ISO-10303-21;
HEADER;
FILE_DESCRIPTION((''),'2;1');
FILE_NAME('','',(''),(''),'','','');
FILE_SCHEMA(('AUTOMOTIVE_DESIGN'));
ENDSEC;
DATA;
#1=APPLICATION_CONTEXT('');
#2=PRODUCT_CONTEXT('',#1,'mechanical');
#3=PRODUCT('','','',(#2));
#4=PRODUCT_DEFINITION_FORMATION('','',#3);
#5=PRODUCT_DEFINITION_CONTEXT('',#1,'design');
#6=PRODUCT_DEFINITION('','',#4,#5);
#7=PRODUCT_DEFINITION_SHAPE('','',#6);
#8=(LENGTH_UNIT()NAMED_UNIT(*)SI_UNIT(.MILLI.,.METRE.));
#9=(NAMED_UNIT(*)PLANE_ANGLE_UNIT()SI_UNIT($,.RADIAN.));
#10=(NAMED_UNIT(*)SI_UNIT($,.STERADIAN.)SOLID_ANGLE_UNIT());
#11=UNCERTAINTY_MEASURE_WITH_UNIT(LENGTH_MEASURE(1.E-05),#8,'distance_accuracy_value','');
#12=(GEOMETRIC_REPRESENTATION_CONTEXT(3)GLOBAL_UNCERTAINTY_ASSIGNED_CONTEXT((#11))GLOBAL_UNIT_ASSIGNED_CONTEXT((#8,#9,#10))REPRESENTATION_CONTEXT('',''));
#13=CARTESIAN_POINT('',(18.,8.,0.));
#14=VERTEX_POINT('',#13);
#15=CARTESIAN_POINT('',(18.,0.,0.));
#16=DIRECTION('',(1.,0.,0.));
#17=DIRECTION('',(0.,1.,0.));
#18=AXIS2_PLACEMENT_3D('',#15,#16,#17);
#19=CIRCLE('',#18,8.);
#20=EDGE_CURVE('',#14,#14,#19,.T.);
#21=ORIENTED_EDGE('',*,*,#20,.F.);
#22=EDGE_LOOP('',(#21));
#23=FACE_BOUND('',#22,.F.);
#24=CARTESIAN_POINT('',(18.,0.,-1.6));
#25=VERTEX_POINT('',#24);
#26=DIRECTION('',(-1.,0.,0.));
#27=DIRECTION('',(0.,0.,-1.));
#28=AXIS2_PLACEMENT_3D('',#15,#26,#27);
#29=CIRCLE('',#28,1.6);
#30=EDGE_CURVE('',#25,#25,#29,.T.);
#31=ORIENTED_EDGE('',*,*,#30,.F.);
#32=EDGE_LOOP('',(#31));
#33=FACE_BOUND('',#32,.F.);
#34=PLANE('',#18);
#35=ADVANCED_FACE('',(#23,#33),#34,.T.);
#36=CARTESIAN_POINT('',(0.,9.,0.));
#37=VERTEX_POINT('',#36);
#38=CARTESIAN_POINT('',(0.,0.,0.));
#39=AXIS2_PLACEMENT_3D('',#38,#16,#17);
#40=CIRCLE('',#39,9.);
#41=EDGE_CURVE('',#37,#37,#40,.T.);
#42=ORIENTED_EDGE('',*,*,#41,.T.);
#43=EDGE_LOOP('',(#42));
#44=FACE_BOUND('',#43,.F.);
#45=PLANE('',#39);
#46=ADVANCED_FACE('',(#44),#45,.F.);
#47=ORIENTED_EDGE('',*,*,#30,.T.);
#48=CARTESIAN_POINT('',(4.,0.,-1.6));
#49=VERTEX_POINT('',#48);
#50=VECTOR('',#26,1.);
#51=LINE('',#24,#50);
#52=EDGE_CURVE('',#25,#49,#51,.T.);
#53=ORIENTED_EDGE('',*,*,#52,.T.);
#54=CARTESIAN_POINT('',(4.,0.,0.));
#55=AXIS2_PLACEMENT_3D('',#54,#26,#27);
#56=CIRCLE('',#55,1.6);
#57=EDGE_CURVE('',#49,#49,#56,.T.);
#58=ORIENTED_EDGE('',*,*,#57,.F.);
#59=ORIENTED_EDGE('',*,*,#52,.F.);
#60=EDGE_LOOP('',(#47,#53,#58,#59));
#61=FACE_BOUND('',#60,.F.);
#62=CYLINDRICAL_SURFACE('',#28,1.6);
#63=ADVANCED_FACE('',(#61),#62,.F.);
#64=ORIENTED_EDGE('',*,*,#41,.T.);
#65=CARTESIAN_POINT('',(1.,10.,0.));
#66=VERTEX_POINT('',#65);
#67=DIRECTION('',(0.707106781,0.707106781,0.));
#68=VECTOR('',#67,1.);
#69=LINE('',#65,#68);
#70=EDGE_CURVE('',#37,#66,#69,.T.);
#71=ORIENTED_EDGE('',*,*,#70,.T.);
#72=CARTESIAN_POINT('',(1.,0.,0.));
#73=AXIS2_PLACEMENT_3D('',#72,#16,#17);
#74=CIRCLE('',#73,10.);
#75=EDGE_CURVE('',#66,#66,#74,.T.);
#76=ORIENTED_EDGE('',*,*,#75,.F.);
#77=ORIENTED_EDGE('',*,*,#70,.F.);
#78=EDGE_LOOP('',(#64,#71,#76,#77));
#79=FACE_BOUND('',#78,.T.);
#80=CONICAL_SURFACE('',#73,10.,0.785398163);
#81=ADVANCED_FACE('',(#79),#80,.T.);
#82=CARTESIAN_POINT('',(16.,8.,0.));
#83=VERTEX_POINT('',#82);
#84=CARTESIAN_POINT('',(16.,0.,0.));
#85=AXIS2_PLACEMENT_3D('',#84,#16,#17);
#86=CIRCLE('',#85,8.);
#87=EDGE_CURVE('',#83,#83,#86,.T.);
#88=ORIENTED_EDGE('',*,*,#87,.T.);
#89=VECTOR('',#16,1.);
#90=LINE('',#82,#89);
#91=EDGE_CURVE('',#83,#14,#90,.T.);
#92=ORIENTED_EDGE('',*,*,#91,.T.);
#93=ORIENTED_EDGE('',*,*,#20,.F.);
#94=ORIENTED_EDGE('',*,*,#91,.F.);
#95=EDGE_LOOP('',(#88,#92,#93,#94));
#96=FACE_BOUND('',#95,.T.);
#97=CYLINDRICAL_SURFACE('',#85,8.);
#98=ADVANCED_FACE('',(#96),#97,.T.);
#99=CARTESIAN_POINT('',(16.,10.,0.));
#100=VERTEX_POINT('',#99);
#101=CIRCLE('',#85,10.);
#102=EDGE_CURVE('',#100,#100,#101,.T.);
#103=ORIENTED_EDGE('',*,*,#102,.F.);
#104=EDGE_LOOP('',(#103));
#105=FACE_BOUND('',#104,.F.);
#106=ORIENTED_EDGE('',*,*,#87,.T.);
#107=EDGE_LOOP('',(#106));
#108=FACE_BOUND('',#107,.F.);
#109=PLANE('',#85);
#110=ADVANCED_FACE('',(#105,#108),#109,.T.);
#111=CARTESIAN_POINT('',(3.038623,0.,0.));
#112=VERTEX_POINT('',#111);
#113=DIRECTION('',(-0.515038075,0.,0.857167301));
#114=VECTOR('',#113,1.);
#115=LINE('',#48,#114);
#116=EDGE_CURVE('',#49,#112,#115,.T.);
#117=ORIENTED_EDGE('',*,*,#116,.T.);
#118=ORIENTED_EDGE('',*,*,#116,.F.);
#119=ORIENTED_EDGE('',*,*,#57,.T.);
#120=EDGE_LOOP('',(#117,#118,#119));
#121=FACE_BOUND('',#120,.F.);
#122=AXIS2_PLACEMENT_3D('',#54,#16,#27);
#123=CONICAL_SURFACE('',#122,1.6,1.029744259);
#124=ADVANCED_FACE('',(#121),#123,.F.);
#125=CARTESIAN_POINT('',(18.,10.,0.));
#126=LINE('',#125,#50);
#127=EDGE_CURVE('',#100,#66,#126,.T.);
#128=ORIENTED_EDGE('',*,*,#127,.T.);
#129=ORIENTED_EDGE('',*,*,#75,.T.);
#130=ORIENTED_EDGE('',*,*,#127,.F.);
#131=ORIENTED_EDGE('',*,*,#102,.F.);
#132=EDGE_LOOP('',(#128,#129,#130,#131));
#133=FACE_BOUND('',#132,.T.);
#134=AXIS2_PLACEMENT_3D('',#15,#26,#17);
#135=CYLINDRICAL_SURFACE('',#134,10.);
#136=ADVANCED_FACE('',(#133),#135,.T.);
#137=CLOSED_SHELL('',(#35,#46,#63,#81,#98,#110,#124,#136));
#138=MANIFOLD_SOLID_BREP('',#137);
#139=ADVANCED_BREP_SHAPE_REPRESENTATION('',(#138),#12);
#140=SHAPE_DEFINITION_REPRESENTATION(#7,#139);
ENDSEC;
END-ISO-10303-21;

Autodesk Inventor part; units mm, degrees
ref_plane "YZ Plane" through (0, 0, 0) normal (1, 0, 0) x (0, 1, 0)
ref_plane "XZ Plane" through (0, 0, 0) normal (0, 1, 0) x (-1, 0, 0)
ref_plane "XY Plane" through (0, 0, 0) normal (0, 0, 1) x (1, 0, 0)
sketch "Sketch1" plane through (0, 0, 0) normal (0, 0, 1) x (1, 0, 0)
  line L0 (0, 0) -> (18, 0)
  line L1 (18, 0) -> (18, 10)
  line L2 (18, 10) -> (0, 10)
  line L3 (0, 10) -> (0, 0)
  line L4 (18, 0) -> (16, 0)
  line L5 (16, 0) -> (16, 8)
  line L6 (16, 8) -> (18, 8)
  line L7 (18, 8) -> (18, 0)
  line L8 (16, 8) -> (16, 10)
  dimension "d0" = 18
  dimension "d1" = 10
  dimension "d2" = 2
  dimension "d3" = 8
revolve "Revolution1" add sketch "Sketch1" angle 360 about axis through (0, 0, 0) along (1, 0, 0) contours L3 L2 L8 L5 L0 | L5 L6 L1 L0
chamfer "Chamfer1" distance 1 angle 45 1 edges at (0, -10, 0)
sketch "Sketch2" plane through (18, 0, 0) normal (1, 0, 0) x (0, 0, -1)
  point P0 (0, 0)
  point P1 (0, 0)
hole "Hole1" at (18, 0, 0) direction (-1, 0, 0) diameter 3.2 depth 14 tip angle 118
thread "Thread1" size "M3.5x0.6" class "6H" standard "ANSI Metric M Profile" length 10.5
properties part number "üllő"
